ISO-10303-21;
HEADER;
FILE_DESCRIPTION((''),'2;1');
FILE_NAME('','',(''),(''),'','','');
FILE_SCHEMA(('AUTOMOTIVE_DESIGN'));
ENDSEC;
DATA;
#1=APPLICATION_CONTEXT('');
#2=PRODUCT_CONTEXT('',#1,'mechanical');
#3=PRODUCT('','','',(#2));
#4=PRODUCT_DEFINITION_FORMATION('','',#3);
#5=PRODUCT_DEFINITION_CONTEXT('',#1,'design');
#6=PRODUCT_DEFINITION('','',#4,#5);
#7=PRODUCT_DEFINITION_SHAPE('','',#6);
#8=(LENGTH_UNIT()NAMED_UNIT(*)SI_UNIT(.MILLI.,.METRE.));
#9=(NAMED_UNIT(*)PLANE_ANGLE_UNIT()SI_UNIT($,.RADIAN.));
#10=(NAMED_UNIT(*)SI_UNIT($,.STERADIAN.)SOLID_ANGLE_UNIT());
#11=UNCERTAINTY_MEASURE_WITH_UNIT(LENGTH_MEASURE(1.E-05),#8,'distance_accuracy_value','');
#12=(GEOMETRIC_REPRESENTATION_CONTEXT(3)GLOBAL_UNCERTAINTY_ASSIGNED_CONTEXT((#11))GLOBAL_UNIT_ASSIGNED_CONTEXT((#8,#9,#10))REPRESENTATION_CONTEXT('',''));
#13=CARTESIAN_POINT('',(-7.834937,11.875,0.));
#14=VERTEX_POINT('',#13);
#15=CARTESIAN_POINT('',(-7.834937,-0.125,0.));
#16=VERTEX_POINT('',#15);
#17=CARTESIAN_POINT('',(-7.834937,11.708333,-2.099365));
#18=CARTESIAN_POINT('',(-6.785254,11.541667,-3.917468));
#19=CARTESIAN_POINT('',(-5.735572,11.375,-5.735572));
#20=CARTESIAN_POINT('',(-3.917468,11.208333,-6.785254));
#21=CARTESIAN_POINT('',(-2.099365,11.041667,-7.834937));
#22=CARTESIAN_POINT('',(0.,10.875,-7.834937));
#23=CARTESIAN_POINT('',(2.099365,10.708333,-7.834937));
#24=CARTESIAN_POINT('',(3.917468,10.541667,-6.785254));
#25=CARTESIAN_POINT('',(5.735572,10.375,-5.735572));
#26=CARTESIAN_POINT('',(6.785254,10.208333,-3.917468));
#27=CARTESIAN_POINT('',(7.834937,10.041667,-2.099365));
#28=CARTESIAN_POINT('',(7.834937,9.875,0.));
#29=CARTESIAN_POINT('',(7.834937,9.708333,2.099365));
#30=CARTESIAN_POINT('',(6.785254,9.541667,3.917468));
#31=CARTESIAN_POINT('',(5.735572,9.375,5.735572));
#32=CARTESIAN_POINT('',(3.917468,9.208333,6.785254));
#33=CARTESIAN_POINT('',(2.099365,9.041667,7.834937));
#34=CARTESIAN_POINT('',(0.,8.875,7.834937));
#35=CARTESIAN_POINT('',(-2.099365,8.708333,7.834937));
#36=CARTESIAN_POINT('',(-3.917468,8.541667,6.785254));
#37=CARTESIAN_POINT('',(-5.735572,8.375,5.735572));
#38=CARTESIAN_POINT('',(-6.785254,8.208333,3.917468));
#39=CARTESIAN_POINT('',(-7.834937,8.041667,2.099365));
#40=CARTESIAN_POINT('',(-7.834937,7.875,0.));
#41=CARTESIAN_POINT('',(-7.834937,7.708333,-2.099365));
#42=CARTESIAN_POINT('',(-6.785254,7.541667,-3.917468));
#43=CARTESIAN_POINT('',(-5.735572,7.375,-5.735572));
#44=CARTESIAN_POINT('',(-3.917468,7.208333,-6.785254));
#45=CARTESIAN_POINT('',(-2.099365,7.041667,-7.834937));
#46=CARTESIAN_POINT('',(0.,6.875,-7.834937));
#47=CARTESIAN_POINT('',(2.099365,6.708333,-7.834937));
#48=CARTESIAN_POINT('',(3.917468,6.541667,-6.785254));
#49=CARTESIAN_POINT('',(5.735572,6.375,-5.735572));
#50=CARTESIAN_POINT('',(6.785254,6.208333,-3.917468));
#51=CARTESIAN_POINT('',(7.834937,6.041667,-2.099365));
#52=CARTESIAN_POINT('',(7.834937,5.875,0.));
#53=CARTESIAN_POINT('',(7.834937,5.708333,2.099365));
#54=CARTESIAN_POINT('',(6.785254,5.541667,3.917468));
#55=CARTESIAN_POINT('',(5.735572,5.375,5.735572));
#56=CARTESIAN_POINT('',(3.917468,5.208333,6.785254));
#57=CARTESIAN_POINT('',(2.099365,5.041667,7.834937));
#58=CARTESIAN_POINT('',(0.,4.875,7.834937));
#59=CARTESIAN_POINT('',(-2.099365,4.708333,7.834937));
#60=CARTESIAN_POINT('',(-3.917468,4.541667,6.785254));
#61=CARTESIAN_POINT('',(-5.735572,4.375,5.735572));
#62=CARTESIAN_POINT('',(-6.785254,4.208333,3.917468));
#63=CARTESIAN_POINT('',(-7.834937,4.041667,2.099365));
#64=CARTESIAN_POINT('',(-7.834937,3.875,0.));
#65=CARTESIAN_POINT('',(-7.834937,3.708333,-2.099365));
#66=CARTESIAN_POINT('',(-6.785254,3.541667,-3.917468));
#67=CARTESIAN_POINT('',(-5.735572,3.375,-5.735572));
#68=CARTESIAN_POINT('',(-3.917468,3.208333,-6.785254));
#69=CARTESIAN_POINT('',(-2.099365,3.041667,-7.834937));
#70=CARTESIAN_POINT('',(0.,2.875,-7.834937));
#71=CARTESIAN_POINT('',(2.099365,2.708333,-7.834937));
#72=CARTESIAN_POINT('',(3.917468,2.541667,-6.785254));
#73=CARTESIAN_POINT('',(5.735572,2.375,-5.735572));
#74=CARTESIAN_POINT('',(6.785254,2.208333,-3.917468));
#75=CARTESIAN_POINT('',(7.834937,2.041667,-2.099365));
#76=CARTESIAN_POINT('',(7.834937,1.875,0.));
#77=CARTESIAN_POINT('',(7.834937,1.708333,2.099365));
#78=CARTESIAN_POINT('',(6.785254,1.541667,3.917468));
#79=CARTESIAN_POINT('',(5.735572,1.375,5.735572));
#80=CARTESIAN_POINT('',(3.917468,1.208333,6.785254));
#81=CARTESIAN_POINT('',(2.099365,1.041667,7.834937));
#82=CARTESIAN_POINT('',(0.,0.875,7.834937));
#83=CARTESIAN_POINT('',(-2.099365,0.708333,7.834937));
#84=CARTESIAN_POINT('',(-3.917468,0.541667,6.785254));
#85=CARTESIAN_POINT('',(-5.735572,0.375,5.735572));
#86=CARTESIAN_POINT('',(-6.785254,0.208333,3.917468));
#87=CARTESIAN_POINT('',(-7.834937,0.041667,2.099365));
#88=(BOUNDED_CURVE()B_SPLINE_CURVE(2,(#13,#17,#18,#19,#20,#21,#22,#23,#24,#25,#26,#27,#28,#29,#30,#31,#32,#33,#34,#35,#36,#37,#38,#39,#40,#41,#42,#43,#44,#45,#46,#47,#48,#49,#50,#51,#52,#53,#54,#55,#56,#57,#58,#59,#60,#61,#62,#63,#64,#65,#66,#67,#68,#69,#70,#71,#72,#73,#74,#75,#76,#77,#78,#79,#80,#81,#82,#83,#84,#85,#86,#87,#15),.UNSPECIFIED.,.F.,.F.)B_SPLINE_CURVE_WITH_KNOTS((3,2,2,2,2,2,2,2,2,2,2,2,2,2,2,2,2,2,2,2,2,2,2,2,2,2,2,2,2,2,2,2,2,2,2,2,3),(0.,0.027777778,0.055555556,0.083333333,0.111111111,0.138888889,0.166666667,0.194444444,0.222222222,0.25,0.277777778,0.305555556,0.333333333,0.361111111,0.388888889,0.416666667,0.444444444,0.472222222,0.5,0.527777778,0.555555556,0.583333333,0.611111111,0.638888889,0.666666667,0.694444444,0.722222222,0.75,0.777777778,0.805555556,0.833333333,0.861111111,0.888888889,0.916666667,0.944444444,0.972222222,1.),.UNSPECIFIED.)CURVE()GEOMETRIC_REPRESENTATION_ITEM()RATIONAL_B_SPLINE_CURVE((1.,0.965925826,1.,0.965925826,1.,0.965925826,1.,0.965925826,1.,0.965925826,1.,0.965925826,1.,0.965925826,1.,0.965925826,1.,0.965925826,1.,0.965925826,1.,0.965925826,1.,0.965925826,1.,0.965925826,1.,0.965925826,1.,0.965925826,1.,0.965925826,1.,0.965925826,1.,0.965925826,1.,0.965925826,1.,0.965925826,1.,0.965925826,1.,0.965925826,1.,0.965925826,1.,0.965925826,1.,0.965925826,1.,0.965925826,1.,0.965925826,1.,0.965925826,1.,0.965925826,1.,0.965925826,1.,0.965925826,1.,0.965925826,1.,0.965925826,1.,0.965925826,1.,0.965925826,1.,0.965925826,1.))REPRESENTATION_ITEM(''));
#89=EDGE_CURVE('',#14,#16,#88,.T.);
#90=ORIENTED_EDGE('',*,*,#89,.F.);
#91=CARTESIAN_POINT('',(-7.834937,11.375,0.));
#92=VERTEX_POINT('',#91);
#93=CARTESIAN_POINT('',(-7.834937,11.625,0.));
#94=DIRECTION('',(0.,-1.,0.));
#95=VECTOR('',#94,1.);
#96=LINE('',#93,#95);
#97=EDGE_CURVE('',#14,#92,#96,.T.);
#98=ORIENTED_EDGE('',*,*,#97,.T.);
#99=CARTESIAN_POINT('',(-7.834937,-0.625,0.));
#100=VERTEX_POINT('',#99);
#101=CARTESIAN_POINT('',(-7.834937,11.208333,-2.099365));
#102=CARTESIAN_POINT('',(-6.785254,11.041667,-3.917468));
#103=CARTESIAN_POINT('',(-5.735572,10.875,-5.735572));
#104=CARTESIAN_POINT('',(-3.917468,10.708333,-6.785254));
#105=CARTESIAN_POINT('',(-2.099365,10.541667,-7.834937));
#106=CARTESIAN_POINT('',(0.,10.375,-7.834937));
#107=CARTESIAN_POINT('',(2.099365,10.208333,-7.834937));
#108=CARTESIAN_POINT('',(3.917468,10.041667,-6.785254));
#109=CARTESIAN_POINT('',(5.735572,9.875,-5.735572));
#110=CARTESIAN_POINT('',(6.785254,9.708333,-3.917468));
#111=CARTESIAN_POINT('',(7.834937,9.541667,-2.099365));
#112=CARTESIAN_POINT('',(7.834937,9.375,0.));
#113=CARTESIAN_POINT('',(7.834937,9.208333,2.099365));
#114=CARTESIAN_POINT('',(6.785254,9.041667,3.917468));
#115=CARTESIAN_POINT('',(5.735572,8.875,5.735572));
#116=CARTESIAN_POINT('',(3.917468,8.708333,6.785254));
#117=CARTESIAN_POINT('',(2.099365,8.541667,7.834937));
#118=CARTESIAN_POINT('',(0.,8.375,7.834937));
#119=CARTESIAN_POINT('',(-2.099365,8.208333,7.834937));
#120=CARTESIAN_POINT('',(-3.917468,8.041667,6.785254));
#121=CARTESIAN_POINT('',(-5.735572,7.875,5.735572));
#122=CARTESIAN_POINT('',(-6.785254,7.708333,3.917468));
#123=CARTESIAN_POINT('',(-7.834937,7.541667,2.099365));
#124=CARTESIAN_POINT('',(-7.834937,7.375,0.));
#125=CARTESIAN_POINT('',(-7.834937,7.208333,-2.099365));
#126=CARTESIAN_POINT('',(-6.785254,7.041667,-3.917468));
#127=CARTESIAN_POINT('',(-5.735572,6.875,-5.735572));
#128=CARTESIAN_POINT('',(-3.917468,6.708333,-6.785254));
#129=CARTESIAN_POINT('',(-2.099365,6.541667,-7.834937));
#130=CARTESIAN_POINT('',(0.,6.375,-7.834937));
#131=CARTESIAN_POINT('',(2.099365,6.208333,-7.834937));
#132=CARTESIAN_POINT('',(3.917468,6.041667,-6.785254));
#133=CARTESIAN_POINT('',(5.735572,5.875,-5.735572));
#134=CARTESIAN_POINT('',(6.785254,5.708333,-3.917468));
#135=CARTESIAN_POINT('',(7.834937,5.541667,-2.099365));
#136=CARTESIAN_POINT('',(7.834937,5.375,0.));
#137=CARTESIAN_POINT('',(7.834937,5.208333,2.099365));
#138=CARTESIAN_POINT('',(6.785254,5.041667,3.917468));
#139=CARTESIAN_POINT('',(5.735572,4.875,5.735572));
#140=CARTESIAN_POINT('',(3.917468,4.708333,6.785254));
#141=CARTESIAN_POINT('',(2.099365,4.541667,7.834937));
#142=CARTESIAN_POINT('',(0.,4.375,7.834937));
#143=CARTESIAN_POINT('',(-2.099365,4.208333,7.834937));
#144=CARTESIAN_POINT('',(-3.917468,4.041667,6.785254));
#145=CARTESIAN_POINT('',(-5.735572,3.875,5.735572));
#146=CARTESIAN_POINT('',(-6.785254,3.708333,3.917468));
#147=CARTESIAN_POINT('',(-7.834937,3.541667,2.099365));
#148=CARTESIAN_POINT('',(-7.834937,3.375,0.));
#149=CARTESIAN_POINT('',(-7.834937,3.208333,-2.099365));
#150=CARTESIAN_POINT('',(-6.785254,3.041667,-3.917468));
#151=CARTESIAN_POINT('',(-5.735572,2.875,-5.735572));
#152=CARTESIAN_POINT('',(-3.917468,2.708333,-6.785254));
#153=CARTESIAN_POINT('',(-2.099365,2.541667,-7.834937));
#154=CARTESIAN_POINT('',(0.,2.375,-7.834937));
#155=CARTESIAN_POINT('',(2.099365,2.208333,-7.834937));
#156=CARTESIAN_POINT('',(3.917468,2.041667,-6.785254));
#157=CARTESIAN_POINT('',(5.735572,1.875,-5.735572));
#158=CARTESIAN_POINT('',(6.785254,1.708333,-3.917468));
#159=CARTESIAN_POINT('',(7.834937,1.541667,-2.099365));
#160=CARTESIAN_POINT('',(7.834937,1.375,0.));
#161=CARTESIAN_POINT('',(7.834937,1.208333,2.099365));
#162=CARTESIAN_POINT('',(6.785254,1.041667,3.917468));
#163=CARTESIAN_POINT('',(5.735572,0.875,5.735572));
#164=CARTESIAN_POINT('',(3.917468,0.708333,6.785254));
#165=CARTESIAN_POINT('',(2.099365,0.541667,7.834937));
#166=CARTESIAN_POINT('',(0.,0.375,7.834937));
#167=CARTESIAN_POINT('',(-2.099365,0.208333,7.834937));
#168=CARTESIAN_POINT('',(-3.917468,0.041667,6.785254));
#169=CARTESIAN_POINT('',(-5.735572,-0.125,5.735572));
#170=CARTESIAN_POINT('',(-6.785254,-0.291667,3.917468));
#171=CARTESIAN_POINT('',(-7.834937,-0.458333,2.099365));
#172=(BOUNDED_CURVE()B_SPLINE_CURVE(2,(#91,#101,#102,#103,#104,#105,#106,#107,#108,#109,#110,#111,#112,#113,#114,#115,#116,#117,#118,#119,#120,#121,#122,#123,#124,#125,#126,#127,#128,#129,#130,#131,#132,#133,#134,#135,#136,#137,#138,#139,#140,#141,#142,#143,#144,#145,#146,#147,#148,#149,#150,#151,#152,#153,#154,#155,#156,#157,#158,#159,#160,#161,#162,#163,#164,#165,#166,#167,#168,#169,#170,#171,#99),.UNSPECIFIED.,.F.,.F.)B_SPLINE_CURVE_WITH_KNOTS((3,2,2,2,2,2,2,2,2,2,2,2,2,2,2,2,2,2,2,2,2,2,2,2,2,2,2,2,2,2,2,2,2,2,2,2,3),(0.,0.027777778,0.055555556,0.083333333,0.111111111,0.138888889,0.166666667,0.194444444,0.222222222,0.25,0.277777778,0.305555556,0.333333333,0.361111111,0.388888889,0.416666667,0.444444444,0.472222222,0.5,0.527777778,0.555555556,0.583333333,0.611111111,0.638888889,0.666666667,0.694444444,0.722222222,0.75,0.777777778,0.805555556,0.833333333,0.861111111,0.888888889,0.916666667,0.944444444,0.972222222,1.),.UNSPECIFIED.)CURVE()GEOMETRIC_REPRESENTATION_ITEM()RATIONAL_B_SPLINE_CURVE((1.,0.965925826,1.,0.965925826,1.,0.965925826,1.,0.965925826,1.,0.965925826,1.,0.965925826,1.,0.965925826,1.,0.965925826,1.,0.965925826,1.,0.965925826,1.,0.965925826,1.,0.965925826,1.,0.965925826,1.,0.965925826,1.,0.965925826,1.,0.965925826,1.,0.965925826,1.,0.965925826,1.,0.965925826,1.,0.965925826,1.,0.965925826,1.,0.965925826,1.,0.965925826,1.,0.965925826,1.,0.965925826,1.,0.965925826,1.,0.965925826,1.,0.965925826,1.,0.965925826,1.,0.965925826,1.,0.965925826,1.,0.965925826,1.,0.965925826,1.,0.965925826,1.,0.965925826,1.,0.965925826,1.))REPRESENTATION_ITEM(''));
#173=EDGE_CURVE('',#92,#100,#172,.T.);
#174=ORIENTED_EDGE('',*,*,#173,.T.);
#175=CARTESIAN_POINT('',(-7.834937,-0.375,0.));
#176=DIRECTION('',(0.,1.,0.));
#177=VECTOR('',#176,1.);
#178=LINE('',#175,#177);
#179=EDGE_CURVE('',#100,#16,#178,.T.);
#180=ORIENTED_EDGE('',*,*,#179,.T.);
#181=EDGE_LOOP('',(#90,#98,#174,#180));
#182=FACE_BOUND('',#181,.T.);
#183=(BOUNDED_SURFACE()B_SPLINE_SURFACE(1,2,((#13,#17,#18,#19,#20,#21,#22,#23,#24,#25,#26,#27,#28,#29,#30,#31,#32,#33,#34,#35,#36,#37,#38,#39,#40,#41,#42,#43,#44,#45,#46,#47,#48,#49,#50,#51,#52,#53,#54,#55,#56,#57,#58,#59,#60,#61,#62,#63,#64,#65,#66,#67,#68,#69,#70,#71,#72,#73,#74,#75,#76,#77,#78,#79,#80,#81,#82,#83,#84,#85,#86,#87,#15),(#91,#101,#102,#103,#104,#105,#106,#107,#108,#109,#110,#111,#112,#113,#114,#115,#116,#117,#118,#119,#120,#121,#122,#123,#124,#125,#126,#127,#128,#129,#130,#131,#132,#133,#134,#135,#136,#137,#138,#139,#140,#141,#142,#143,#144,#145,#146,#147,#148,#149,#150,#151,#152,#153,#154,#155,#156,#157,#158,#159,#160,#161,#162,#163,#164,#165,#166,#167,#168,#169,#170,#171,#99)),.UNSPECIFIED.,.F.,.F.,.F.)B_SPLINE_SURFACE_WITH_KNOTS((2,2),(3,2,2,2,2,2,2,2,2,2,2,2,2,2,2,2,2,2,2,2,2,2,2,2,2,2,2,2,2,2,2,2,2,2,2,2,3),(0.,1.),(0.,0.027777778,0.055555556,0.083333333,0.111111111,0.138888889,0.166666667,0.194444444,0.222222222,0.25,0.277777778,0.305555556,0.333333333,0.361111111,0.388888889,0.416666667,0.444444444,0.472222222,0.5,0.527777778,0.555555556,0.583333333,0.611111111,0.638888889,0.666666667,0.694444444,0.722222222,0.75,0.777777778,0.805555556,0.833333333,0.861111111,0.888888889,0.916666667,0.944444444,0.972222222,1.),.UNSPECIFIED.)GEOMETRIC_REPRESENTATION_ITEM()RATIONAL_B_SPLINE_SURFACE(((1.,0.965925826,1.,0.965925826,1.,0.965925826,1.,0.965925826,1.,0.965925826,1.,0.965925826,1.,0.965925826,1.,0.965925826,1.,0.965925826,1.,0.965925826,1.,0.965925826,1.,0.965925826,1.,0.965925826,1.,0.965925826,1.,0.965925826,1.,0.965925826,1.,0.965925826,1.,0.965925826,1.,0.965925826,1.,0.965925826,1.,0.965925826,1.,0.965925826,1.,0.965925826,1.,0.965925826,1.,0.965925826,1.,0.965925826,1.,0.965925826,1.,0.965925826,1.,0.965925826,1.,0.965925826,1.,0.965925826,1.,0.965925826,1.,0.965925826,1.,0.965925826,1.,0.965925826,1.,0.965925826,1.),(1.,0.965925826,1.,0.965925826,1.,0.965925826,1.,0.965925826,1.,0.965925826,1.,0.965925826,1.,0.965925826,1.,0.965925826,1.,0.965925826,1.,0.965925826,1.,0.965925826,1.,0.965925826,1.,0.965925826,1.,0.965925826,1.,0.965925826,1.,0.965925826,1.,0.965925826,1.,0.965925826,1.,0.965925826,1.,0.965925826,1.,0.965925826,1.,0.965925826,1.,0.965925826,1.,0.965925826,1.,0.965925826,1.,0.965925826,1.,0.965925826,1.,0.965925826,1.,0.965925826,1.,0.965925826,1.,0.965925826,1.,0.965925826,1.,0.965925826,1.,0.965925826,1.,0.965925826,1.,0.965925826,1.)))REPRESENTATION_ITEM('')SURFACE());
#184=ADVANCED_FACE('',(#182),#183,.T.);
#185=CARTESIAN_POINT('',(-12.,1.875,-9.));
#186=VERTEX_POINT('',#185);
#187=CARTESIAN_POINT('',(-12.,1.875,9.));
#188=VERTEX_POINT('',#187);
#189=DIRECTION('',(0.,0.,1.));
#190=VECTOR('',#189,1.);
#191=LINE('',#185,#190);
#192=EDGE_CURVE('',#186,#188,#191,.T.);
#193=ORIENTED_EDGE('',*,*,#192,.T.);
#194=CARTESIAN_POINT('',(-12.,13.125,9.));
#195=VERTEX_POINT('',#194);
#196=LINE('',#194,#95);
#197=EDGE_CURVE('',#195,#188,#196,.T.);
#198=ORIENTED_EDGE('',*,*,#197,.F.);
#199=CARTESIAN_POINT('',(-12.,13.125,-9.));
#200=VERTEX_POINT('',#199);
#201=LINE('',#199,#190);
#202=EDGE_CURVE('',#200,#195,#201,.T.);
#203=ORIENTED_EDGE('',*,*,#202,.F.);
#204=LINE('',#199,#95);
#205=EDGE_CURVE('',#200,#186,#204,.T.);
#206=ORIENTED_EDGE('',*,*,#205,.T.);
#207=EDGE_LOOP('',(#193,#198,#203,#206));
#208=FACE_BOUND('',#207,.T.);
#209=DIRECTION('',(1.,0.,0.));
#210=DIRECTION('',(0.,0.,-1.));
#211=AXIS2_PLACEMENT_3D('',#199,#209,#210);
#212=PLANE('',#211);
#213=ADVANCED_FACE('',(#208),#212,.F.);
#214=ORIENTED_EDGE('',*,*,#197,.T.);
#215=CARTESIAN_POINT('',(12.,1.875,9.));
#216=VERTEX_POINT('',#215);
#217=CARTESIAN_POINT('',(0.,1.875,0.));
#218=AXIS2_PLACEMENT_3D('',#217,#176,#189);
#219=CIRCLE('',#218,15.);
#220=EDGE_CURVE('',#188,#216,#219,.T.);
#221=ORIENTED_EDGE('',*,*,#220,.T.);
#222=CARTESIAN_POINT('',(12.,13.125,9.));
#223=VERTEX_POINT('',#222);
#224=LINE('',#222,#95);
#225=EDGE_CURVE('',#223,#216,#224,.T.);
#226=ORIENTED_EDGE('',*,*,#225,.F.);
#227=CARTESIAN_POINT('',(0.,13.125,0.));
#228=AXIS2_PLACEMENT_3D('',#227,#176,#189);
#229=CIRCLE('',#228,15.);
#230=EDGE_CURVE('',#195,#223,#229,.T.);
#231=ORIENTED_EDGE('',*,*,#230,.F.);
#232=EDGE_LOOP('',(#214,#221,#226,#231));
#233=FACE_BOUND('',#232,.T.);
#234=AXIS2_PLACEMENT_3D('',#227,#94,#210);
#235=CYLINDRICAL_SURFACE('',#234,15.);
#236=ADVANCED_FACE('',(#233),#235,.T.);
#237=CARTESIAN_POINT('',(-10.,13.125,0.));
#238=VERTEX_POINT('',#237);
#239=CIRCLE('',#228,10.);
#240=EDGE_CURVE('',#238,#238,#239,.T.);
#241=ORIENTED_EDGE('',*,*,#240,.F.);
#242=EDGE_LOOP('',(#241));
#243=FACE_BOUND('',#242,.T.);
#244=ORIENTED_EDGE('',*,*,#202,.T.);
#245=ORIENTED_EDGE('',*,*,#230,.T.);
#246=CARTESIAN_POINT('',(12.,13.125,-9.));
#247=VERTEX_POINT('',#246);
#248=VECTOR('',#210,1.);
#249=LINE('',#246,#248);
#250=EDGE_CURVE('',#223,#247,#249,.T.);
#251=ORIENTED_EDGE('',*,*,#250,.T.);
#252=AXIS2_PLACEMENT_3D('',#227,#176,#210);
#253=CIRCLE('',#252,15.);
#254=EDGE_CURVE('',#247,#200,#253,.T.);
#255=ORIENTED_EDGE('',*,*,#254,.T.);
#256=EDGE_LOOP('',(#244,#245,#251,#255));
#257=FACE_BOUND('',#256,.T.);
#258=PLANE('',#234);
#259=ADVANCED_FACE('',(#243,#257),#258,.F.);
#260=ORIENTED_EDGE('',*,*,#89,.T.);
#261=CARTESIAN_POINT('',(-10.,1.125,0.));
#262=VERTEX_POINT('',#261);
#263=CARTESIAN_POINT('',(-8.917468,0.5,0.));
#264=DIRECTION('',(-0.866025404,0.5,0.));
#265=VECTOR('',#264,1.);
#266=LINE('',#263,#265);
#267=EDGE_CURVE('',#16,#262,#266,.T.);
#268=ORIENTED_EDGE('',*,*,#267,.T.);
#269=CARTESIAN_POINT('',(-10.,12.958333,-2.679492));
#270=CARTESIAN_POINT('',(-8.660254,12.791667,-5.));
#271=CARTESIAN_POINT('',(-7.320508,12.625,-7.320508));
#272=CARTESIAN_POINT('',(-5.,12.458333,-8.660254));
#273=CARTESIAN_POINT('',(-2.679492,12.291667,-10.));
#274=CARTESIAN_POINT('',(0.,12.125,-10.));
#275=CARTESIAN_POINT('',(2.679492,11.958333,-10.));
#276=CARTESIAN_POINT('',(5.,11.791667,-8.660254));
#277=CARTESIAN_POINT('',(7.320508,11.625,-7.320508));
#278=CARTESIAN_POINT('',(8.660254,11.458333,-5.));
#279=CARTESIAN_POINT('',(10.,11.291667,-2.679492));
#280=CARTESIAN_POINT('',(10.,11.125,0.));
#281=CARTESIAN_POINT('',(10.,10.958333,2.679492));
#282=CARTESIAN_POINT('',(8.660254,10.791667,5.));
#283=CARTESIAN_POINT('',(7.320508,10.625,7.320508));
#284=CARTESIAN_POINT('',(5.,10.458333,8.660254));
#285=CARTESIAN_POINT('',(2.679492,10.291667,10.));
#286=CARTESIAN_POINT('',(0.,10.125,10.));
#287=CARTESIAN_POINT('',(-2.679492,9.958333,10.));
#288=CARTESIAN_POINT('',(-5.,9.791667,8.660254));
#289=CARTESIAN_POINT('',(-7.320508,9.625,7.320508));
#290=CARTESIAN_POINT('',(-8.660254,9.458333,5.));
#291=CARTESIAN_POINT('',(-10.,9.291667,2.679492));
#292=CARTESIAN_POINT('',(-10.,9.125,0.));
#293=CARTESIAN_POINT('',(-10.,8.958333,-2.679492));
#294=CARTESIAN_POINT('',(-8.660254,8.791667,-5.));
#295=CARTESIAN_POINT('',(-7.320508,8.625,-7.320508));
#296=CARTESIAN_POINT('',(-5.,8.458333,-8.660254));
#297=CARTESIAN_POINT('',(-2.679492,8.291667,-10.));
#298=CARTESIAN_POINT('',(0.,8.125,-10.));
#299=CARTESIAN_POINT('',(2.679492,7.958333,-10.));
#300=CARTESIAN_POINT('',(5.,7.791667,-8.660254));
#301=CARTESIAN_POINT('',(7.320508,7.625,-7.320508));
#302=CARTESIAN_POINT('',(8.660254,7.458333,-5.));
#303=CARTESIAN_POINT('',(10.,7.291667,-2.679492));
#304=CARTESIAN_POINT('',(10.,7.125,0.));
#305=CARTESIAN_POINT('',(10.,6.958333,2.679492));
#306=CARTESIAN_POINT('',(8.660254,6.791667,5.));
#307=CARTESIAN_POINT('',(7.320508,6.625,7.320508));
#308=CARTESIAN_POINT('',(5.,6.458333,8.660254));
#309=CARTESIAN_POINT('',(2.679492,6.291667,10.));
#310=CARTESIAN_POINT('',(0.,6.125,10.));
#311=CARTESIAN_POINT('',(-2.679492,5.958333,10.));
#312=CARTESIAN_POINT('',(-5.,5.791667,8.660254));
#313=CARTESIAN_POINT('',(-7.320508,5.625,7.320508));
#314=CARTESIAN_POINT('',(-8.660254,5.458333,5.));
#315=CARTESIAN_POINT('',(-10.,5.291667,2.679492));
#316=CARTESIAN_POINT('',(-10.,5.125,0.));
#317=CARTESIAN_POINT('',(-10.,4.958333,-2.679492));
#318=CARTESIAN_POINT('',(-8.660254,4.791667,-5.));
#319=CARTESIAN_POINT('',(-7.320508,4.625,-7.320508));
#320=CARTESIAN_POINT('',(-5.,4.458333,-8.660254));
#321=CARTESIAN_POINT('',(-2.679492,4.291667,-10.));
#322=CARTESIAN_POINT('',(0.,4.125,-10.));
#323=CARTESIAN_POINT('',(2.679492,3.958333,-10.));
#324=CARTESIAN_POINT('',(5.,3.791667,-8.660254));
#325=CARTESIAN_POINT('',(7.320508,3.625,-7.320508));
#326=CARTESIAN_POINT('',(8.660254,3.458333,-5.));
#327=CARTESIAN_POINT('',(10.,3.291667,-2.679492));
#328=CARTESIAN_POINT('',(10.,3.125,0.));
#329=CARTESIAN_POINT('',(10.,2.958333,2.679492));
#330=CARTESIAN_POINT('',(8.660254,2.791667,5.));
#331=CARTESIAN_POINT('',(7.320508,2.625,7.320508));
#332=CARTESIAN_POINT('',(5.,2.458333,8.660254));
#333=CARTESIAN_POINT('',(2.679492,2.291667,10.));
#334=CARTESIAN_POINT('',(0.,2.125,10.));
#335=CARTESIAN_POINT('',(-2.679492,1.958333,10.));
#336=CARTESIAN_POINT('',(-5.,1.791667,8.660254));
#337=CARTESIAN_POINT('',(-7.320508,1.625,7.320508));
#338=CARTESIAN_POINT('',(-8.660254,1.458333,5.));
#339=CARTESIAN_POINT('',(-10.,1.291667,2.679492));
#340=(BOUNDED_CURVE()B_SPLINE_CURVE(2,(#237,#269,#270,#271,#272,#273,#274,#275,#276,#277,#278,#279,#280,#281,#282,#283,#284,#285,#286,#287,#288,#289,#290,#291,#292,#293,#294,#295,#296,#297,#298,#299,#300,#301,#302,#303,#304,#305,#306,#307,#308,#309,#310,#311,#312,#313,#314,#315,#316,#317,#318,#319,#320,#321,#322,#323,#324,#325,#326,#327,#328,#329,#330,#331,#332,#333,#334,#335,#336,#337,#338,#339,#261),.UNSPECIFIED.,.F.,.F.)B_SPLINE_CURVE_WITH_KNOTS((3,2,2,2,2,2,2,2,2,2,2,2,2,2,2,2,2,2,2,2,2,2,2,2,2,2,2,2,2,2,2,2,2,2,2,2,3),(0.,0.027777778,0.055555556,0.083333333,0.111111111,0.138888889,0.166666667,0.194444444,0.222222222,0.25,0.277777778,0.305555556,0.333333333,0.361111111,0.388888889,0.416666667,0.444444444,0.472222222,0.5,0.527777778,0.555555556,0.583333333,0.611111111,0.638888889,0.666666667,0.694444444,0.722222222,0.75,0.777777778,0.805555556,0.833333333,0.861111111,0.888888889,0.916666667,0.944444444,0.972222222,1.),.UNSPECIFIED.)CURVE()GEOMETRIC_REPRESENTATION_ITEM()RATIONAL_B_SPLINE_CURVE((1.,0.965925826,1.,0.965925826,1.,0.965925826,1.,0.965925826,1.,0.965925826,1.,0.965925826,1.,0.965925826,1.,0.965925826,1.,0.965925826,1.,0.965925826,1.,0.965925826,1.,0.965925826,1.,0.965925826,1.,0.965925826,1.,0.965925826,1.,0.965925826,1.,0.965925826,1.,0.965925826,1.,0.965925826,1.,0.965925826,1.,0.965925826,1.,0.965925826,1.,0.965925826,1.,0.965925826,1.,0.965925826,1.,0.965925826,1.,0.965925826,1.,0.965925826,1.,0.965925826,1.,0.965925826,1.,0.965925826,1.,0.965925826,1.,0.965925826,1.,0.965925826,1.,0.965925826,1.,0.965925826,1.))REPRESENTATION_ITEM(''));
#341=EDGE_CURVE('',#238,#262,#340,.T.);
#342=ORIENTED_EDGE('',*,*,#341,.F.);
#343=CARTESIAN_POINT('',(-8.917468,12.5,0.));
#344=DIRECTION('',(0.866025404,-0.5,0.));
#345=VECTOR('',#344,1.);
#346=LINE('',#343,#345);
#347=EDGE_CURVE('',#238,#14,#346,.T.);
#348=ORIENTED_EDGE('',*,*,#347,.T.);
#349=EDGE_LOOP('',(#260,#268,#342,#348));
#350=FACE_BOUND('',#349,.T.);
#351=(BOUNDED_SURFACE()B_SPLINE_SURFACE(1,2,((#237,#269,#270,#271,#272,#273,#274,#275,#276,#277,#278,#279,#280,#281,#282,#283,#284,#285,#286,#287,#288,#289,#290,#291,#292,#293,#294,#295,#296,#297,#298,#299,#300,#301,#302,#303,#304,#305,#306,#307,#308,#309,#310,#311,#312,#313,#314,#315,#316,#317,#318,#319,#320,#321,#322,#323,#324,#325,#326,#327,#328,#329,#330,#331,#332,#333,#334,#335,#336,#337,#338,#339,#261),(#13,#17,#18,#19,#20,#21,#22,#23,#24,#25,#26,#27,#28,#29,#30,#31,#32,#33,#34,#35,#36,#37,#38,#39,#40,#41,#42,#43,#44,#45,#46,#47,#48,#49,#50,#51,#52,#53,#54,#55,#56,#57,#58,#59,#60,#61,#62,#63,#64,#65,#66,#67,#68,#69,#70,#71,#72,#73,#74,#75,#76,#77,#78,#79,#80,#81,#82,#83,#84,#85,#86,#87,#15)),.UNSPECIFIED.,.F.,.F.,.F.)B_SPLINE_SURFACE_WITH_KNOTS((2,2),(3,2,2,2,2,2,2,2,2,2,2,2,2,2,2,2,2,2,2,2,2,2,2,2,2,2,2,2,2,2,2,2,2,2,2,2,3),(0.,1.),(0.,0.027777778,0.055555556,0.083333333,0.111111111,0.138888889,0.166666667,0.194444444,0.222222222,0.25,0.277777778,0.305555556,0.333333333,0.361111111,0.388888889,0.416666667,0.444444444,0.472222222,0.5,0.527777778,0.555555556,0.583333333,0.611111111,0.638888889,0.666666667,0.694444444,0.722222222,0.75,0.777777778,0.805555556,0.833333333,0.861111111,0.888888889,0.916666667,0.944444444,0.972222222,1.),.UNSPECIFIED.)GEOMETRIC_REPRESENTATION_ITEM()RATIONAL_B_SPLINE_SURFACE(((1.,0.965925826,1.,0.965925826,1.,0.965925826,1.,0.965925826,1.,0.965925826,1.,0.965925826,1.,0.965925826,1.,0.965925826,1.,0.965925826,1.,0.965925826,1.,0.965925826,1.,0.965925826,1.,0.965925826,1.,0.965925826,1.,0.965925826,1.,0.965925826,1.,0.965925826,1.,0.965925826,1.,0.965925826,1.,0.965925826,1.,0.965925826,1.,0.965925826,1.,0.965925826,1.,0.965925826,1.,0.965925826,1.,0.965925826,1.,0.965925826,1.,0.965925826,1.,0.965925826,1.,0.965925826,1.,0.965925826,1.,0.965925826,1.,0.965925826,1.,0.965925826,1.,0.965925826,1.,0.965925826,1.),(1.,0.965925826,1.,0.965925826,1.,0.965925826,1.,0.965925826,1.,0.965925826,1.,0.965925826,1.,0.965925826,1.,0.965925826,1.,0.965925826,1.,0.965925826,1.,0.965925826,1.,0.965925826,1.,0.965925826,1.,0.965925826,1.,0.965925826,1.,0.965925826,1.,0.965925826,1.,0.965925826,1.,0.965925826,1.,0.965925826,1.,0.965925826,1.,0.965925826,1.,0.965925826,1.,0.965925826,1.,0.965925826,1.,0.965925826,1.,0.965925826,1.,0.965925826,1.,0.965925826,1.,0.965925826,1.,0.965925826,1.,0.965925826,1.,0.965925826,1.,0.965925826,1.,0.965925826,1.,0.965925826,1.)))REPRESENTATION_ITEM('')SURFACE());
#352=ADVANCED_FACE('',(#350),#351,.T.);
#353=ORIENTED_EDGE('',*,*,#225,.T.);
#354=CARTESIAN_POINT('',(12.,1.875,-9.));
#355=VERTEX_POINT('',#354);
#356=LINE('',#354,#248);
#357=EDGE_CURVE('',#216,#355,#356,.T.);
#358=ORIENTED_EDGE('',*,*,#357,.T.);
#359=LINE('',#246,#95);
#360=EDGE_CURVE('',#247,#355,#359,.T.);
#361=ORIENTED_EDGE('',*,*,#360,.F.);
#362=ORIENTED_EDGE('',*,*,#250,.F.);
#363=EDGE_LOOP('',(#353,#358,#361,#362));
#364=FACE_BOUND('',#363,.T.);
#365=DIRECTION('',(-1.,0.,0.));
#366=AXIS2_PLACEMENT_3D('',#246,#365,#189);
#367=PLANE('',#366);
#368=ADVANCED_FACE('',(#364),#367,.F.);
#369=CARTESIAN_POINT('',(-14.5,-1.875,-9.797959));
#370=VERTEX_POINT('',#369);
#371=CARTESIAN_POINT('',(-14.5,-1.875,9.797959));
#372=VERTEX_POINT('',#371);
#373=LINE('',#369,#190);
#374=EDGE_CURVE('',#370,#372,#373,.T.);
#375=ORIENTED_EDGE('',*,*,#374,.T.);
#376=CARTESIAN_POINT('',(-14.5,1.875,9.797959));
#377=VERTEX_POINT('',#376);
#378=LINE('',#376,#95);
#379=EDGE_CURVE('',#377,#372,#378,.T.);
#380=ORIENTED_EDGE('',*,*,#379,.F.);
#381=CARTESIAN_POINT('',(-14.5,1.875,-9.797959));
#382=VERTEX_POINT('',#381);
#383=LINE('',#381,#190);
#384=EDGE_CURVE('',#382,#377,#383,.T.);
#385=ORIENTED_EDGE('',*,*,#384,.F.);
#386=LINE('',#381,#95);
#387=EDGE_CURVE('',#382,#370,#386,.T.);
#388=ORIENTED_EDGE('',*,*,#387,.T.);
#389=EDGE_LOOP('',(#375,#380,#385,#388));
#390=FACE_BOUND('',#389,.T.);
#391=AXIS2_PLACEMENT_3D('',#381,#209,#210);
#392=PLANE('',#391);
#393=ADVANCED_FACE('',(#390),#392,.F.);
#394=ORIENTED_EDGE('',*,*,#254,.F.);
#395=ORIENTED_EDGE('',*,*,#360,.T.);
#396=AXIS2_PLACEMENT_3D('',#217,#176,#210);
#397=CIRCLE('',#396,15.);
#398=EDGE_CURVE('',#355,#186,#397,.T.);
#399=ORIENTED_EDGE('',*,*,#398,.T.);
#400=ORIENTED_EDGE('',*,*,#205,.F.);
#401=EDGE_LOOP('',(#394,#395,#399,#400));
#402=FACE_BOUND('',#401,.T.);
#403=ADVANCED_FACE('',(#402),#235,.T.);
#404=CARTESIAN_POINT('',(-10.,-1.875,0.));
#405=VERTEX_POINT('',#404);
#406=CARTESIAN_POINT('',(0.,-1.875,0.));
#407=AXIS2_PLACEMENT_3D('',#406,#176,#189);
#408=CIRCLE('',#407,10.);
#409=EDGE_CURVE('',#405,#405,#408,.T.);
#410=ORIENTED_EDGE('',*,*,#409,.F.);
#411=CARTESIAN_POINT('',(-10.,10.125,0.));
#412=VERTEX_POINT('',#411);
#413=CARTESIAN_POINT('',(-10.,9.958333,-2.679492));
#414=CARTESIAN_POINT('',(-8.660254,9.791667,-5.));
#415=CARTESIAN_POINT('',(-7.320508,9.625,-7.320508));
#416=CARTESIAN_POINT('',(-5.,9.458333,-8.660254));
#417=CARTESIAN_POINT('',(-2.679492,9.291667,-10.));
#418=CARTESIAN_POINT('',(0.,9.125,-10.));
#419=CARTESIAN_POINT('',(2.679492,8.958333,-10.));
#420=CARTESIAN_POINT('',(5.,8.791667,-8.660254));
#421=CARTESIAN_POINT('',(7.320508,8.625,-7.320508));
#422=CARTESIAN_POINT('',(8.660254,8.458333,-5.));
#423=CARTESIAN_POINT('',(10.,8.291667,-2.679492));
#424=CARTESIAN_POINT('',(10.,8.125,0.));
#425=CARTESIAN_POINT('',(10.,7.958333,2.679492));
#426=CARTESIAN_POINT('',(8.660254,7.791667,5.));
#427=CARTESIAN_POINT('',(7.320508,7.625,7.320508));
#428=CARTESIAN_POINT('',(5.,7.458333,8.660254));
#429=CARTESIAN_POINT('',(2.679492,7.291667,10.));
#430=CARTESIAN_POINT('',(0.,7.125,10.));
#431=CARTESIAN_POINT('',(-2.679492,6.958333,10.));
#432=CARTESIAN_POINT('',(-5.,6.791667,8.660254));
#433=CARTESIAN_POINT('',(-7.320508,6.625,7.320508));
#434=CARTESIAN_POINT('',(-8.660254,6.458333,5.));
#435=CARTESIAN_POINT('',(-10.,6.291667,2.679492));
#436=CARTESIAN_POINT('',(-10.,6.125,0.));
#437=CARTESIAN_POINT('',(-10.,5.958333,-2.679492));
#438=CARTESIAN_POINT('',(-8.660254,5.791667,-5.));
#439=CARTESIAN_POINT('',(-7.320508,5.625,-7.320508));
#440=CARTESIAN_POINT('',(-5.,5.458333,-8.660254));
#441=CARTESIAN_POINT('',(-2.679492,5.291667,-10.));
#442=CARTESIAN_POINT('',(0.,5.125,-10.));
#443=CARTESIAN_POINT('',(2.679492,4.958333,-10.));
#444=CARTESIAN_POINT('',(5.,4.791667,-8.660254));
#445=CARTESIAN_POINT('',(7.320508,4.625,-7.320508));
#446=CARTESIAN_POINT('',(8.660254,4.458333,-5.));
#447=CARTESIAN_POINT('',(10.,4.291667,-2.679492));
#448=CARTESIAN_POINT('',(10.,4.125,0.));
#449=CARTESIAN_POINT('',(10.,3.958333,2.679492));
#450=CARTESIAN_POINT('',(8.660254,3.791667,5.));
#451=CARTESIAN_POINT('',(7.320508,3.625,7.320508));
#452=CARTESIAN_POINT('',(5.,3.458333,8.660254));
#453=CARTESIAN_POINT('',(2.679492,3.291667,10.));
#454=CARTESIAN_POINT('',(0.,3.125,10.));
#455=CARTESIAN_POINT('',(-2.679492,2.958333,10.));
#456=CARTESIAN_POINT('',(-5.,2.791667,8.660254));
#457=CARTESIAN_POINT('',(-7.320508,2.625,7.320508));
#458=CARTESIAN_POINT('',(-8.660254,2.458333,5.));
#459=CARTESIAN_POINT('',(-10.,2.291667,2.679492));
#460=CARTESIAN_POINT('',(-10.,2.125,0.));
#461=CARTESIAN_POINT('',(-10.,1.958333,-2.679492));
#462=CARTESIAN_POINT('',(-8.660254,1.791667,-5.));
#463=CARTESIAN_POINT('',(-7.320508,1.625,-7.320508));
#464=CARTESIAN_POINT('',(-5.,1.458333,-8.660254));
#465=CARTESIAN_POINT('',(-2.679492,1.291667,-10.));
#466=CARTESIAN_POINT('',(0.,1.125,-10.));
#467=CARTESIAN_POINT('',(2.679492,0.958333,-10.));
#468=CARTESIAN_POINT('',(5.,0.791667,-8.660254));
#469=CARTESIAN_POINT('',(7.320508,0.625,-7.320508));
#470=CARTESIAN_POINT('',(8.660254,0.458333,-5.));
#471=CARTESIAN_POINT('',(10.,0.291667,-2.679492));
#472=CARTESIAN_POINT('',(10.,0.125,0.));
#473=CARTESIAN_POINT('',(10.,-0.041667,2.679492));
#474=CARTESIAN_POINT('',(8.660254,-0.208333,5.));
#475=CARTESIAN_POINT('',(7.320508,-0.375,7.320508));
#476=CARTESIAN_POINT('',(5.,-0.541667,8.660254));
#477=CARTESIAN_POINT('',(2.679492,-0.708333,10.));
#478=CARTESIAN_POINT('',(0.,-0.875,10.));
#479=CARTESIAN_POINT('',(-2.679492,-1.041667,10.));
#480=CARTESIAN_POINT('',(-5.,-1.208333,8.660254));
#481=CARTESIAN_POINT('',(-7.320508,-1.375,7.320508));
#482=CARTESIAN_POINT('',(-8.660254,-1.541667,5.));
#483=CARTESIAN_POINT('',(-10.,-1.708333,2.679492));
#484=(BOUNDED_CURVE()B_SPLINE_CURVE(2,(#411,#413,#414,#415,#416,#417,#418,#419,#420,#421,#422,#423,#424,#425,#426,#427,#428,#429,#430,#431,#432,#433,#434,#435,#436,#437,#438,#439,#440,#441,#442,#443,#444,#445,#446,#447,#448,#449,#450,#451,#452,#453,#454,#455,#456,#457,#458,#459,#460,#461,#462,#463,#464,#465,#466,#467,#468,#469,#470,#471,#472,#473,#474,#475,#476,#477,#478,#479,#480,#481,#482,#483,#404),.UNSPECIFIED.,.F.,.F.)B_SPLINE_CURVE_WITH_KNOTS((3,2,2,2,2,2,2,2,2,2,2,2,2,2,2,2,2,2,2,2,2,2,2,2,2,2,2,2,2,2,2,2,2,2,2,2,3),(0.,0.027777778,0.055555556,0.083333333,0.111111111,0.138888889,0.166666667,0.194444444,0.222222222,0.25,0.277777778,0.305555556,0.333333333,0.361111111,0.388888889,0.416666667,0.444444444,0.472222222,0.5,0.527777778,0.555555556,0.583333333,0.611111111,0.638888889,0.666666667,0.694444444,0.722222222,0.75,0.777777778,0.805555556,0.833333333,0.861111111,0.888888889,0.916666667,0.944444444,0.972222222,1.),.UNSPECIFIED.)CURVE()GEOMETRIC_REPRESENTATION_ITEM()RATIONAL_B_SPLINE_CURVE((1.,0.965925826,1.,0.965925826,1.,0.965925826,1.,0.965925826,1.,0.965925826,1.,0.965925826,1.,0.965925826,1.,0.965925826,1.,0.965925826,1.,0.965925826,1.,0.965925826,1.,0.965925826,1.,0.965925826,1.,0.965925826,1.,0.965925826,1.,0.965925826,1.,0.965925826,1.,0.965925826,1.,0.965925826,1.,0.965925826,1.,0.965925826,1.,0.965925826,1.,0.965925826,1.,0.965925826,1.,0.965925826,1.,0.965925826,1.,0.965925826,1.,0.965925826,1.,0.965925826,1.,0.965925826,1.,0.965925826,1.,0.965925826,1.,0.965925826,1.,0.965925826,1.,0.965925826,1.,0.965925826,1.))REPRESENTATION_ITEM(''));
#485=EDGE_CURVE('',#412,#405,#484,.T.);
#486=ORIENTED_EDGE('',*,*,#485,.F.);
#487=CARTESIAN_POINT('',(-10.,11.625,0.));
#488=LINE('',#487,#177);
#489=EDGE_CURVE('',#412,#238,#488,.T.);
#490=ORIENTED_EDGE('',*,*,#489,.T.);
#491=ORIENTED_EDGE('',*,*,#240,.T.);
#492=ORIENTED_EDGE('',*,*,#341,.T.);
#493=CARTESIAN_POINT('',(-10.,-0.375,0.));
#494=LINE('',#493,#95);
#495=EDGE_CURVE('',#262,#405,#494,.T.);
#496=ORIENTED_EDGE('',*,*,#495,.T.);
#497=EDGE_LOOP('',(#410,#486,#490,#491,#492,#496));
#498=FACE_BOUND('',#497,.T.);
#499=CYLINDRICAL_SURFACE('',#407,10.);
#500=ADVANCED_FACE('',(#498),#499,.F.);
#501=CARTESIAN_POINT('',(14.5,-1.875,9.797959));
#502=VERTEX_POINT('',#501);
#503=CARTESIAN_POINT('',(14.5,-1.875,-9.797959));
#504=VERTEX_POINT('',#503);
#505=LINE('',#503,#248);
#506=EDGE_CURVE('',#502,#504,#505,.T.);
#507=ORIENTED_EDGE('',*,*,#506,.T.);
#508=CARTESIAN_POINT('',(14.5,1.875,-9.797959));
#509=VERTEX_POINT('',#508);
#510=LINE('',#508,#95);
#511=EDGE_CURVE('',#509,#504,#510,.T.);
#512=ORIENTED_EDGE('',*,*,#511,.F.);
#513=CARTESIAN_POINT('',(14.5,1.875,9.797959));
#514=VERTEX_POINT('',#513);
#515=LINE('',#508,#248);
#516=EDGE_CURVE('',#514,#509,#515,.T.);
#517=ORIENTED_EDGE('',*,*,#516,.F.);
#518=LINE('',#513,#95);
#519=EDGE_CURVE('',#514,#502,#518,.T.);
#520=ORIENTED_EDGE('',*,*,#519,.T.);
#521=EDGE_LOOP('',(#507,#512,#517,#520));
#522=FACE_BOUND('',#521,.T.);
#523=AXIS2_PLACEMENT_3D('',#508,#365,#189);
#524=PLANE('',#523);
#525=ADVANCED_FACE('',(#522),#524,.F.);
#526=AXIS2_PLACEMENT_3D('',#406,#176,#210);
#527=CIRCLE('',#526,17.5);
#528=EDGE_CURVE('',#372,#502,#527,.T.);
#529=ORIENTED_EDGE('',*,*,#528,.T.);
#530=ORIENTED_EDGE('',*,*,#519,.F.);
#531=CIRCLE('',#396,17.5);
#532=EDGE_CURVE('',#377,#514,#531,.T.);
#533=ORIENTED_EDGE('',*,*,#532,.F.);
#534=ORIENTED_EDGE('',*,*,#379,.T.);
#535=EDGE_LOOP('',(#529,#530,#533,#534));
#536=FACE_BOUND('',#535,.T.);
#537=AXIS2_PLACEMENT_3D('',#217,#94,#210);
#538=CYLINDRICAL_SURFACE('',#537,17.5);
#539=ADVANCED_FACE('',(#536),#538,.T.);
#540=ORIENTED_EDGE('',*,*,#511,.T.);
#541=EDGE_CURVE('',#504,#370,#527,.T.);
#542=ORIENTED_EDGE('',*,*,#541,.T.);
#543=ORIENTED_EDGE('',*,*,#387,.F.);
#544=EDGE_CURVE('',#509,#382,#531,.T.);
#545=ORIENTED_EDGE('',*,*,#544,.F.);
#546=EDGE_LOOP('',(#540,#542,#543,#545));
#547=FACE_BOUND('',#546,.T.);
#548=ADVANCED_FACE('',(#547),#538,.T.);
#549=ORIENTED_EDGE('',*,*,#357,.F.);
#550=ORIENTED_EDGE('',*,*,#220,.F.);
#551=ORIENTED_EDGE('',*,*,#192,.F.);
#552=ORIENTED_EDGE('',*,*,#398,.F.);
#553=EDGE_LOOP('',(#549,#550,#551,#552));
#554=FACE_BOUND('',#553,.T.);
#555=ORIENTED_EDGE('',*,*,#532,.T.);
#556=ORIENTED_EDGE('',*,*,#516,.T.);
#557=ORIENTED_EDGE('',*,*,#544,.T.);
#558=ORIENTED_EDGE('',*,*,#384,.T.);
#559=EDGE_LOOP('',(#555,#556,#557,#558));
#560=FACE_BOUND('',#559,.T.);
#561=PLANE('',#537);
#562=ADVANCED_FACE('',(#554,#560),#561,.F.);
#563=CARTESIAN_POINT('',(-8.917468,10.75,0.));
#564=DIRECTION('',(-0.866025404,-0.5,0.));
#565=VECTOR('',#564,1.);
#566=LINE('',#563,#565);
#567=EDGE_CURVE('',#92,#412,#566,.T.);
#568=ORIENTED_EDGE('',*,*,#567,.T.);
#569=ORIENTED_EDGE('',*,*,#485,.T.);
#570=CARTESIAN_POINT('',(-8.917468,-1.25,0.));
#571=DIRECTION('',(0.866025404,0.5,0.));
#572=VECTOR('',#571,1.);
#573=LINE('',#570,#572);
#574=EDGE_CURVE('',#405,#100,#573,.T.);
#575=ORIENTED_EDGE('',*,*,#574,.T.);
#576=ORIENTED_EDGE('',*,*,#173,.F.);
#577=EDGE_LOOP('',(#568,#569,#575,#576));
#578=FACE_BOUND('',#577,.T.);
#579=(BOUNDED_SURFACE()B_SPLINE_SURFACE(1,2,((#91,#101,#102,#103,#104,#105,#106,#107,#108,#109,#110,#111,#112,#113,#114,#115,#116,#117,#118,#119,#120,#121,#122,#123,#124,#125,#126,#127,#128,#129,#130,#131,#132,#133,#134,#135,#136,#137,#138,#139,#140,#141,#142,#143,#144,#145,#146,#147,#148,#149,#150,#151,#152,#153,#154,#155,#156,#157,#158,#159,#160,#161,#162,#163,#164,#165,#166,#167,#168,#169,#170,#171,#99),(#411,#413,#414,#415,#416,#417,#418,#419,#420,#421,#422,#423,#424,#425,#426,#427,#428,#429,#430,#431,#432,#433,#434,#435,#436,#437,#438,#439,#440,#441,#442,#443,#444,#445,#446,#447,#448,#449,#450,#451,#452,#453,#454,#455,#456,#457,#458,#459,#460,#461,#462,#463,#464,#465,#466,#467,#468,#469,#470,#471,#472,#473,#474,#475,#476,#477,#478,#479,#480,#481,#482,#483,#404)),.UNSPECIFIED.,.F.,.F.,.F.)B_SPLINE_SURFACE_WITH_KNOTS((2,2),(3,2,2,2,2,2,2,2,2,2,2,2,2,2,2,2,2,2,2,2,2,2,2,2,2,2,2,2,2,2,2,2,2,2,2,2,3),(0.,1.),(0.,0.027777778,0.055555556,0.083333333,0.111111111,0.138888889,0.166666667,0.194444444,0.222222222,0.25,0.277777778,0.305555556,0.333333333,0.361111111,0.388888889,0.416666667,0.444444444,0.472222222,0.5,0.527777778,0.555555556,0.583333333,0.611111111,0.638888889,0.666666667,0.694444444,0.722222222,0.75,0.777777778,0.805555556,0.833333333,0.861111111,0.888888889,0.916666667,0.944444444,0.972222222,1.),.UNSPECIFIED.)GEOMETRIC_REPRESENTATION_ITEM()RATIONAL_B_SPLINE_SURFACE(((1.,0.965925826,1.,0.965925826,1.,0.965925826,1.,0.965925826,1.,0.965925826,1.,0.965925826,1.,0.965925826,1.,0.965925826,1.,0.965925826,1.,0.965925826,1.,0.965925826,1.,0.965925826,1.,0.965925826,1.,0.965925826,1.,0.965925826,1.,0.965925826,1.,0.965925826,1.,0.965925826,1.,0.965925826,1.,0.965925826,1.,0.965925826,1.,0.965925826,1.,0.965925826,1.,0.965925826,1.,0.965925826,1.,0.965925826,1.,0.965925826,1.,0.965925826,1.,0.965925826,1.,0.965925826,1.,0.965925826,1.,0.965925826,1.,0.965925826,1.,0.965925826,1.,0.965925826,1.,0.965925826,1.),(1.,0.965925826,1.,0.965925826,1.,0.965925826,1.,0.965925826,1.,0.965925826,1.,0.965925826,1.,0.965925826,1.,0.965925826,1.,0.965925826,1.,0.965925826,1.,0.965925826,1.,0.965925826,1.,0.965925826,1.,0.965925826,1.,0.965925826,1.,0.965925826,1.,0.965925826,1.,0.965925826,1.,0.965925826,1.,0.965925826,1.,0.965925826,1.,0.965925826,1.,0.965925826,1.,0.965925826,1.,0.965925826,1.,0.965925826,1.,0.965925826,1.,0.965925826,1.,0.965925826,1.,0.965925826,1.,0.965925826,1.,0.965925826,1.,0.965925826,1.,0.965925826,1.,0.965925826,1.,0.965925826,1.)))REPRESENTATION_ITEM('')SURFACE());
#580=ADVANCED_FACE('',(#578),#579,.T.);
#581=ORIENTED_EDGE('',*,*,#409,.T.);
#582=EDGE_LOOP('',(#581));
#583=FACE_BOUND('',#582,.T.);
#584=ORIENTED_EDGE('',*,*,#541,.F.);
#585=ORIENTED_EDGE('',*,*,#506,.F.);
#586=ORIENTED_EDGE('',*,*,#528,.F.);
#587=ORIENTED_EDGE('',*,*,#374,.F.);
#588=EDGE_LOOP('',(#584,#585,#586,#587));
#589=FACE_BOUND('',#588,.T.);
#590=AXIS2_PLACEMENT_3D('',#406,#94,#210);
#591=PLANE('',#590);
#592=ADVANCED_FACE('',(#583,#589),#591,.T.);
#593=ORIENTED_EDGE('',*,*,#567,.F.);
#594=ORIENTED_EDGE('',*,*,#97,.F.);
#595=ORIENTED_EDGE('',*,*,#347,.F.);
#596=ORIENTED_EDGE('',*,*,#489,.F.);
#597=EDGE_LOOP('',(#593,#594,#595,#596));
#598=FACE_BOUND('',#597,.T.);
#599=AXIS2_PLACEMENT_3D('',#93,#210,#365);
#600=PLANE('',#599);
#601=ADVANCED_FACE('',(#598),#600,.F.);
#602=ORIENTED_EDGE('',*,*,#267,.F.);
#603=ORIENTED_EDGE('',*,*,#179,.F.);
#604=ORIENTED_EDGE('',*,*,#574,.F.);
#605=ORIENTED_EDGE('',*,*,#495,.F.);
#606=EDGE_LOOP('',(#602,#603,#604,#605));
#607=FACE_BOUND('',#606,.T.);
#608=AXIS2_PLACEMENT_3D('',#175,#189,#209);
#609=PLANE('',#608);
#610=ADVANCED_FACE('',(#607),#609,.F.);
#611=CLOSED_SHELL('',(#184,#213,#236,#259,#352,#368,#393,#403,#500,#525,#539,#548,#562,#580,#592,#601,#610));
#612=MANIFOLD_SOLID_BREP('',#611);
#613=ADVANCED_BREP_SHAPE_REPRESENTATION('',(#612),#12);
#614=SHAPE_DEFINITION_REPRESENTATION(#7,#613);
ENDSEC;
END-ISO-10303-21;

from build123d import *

# Parameters (mm, degrees)
BOSS_EXTRUDE1_DEPTH = 1.875
BOSS_EXTRUDE2_DEPTH = 11.25
SKETCH4_R           = 10
CUT_EXTRUDE1_DEPTH  = 28.230497608
THREAD1_PITCH       = 4


with BuildPart() as part:
    # Sketch1 → Boss-Extrude1 (new, symmetric)
    with BuildSketch(Plane(origin=(0, 0, 0), x_dir=(1, 0, 0), z_dir=(0, 1, 0))):
        with BuildLine():
            Line((-14.5, 9.797958971), (-14.5, -9.797958971))
            ThreePointArc((-14.5, -9.797958971), (0, -17.5), (14.5, -9.797958971))
            Line((14.5, -9.797958971), (14.5, 9.797958971))
            ThreePointArc((14.5, 9.797958971), (0, 17.5), (-14.5, 9.797958971))
        make_face()
    extrude(amount=BOSS_EXTRUDE1_DEPTH, both=True)

    # Sketch2 → Boss-Extrude2 (add)
    with BuildSketch(Plane(origin=(0, 1.875, 0), x_dir=(1, 0, 0), z_dir=(0, 1, 0))):
        with BuildLine():
            Line((12, 9), (12, -9))
            ThreePointArc((12, -9), (0, -15), (-12, -9))
            Line((-12, -9), (-12, 9))
            ThreePointArc((-12, 9), (0, 15), (12, 9))
        make_face()
    extrude(amount=BOSS_EXTRUDE2_DEPTH)

    # Sketch4 → Cut-Extrude1 (cut, through all)
    with BuildSketch(Plane(origin=(0, 13.125, 0), x_dir=(1, 0, 0), z_dir=(0, 1, 0))):
        with Locations(Location((0, 0, 0), (0, 0, 270))):
            Circle(SKETCH4_R)
    extrude(amount=-CUT_EXTRUDE1_DEPTH, mode=Mode.SUBTRACT)

    # Thread1: arcs per turn and ends read off the stored shape
    # Thread1: the profile of Thread Profile1 profile screwed along a right-hand helix through 3 turns, 12 arcs to a turn; built about Z, then put on its axis
    thread1_z = Axis((0, 0, 0), (0, 0, 1))
    thread1_corners = [(10.0003, 0, -0.000173205), (7.8349365, 0, 1.249999995), (7.8349365, 0, 1.749999995), (10.0003, 0, 3.000173194)]
    with BuildLine(mode=Mode.PRIVATE) as thread1_profile:
        Line(thread1_corners[0], thread1_corners[1])
        Line(thread1_corners[1], thread1_corners[2])
        Line(thread1_corners[2], thread1_corners[3])
        Line(thread1_corners[3], thread1_corners[0])
    thread1_cap = Face(thread1_profile.wire())
    thread1_turn_angles = [0, 15, 30, 45, 60, 75, 90, 105, 120, 135, 150, 165, 180, 195, 210, 225, 240, 255, 270, 285, 300, 315, 330, 345, 360]
    thread1_turn_weights = [1, 0.9659258262890683, 1, 0.9659258262890683, 1, 0.9659258262890683, 1, 0.9659258262890683, 1, 0.9659258262890683, 1, 0.9659258262890683, 1, 0.9659258262890683, 1, 0.9659258262890683, 1, 0.9659258262890683, 1, 0.9659258262890683, 1, 0.9659258262890683, 1, 0.9659258262890683, 1]
    thread1_turn_rails = [Edge.make_bspline([Vector(p[0], p[1], 0).rotate(thread1_z, thread1_turn_angles[k]) / thread1_turn_weights[k] + Vector(0, 0, p[2] + THREAD1_PITCH * thread1_turn_angles[k] / 360) for k in range(25)], [0, 0, 0, 1, 1, 2, 2, 3, 3, 4, 4, 5, 5, 6, 6, 7, 7, 8, 8, 9, 9, 10, 10, 11, 11, 12, 12, 12], 2, thread1_turn_weights) for p in thread1_corners]
    thread1_turn_sides = [Face.make_surface_from_curves(thread1_turn_rails[p[0]], thread1_turn_rails[p[1]]) for p in [(0, 1), (1, 2), (2, 3), (3, 0)]]
    thread1 = Plane(origin=(0, 13.125, 0), x_dir=(-1, 0, 0), z_dir=(0, -1, 0)) * Solid(Shell([*[p.moved(Location((0, 0, THREAD1_PITCH * i))) for i in range(3) for p in thread1_turn_sides], thread1_cap, thread1_cap.rotate(thread1_z, 1080).moved(Location((0, 0, THREAD1_PITCH * 1080 / 360)))]))
    add(thread1)


solid = part.part
